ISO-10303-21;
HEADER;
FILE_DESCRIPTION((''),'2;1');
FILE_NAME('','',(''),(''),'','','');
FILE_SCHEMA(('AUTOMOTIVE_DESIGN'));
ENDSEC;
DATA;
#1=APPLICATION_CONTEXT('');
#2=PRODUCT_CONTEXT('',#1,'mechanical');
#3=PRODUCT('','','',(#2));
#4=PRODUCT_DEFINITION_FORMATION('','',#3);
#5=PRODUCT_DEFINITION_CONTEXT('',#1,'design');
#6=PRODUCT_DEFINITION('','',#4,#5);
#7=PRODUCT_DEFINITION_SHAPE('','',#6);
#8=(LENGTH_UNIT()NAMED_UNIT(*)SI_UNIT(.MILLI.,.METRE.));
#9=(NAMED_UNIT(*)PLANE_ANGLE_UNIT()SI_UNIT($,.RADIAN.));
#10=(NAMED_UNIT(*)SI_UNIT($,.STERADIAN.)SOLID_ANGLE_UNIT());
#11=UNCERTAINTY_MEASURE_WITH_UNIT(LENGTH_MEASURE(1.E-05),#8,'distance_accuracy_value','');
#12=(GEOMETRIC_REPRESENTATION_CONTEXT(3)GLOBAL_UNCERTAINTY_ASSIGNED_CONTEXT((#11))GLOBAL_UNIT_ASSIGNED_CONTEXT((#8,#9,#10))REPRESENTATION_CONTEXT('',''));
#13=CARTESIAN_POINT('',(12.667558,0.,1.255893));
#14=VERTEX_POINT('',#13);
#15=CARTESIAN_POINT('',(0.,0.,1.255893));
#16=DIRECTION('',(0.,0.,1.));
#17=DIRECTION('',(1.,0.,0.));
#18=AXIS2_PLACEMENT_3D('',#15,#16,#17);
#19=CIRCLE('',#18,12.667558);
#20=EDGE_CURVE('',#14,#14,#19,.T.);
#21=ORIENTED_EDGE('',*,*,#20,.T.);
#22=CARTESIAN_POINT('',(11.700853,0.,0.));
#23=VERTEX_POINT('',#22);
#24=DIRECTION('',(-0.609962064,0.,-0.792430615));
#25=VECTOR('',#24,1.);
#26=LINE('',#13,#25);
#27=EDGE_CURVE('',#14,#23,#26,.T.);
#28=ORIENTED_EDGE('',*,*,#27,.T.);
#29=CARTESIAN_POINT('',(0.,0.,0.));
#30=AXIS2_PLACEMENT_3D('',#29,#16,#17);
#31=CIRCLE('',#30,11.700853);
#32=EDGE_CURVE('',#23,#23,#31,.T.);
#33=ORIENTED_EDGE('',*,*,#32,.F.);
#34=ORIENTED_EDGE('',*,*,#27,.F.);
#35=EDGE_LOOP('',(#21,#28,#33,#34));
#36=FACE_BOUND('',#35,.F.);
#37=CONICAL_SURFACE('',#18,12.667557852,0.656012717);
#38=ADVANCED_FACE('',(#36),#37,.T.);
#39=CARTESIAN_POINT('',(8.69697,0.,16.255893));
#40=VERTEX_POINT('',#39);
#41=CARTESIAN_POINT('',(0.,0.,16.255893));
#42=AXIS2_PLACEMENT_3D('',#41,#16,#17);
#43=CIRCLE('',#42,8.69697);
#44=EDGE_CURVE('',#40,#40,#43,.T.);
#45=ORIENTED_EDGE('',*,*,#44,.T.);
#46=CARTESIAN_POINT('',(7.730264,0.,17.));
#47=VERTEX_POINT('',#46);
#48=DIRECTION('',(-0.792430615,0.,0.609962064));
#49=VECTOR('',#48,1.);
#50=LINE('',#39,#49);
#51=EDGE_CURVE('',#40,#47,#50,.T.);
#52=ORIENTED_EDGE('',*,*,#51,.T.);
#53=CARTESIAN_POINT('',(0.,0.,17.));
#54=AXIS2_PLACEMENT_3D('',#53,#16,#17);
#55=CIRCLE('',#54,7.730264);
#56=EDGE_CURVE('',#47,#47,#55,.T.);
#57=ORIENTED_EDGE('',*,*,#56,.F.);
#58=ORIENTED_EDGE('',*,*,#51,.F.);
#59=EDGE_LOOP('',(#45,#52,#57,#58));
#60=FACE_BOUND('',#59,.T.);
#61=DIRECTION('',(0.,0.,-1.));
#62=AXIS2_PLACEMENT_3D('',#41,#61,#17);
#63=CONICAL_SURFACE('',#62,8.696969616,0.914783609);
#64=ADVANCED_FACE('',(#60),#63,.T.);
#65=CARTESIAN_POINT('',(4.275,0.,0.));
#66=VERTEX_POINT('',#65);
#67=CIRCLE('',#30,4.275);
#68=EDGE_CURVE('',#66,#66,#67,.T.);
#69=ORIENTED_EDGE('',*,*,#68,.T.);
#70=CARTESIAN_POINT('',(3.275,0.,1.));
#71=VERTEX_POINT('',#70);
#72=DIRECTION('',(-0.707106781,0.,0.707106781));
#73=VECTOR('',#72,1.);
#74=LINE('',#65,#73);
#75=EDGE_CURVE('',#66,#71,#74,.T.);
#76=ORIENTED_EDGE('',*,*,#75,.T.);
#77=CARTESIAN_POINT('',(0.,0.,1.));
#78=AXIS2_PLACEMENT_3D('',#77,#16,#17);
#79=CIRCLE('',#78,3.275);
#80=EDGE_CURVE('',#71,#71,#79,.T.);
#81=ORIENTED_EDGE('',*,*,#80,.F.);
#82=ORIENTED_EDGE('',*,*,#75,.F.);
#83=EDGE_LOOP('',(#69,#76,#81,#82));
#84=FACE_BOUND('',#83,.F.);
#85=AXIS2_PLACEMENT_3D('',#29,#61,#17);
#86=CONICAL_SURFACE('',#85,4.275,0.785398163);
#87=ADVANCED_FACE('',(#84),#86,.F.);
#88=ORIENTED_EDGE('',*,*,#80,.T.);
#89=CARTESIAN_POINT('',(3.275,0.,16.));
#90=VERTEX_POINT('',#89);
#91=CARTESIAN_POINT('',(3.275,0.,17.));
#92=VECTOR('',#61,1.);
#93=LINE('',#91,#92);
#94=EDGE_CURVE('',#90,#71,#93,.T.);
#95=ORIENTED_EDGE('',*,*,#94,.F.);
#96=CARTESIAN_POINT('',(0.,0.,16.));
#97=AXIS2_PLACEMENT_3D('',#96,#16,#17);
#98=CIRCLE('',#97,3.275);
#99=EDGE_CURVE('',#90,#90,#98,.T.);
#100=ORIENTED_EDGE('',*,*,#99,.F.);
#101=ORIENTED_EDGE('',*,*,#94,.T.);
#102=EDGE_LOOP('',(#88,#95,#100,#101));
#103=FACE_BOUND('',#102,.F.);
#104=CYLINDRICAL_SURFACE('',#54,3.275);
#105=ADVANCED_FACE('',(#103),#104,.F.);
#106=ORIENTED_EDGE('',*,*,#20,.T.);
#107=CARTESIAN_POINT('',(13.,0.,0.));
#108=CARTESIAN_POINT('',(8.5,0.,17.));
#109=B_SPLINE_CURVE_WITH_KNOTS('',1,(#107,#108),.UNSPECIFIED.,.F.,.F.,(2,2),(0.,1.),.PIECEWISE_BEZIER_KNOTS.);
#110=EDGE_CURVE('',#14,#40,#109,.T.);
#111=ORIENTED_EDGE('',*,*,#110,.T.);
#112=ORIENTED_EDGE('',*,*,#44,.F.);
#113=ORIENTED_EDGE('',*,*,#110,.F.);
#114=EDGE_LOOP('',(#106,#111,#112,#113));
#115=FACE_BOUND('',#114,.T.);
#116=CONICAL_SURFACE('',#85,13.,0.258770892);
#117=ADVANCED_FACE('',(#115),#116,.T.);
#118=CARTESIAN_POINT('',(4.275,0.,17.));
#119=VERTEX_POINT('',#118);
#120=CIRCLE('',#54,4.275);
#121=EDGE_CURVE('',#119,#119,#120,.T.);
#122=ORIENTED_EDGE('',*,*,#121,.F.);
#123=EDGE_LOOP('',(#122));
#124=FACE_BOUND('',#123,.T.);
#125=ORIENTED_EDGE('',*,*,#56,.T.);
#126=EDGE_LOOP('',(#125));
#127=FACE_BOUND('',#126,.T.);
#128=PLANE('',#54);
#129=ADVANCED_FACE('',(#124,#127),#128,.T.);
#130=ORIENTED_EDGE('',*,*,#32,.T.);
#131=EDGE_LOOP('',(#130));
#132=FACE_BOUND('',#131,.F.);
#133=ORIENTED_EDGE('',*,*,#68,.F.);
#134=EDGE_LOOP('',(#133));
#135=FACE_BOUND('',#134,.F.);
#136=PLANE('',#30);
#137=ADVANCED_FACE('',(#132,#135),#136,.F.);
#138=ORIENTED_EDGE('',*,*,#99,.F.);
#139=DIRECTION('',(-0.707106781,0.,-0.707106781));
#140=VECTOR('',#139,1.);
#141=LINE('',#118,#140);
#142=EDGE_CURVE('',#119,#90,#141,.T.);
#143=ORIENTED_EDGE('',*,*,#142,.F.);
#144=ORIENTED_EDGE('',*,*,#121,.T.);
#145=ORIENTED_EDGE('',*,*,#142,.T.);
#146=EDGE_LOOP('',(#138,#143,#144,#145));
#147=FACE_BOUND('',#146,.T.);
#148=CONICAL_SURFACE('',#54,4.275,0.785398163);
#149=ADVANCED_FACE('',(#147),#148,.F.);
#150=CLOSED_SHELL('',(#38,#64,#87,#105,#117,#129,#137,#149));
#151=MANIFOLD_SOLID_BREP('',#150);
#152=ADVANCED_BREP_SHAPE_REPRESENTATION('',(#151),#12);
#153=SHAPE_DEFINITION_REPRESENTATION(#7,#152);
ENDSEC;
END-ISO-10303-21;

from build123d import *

# Parameters (mm, degrees)
F0_R     = 13
F2_R     = 8.5
F4_R     = 3.275
F5_DEPTH = 25


# Not quite as in the source:
# - a fillet or chamfer that OpenCascade refuses, or shapes differently, is made with other operations: its cross-section is extruded or revolved along the edge and cut away or added


with BuildPart() as f3:
    # F0 (on Top) → F3 section 0
    with BuildSketch(Plane.XY):
        Circle(F0_R)
    # F2 (on offset) → F3 section 1
    with BuildSketch(Plane.XY.offset(17)):
        Circle(F2_R)
    loft()

    # F4 (on face) → F5 (cut)
    with BuildSketch(Plane.XY.offset(17)):
        Circle(F4_R)
    extrude(amount=-F5_DEPTH, mode=Mode.SUBTRACT)

    # F6: chamfer of 1 on 4 edges, made by hand

    # F6_s1 → F6_t2 (revolve, cut)
    with BuildSketch(Plane.XZ):
        Polygon((4.275, 17), (3.275, 16), (3.275, 17), align=None)
    revolve(axis=Axis((0, 0, 17), (0, 0, 1)), mode=Mode.SUBTRACT)

    # F6_s3 → F6_t4 (revolve, cut)
    with BuildSketch(Plane.XZ):
        Polygon((8.6969696164, 16.2558925603), (7.7302643885, 17), (8.5, 17), align=None)
    revolve(axis=Axis((0, 0, 17), (0, 0, 1)), mode=Mode.SUBTRACT)

    # F6_s5 → F6_t6 (revolve, cut)
    with BuildSketch(Plane.XZ):
        Polygon((12.6675578517, 1.2558925603), (11.7008526238, 0), (13, 0), align=None)
    revolve(axis=Axis((0, 0, 0), (0, 0, 1)), mode=Mode.SUBTRACT)

    # F6_s7 → F6_t8 (revolve, cut)
    with BuildSketch(Plane.XZ):
        Polygon((4.275, 0), (3.275, 1), (3.275, 0), align=None)
    revolve(axis=Axis((0, 0, 0), (0, 0, 1)), mode=Mode.SUBTRACT)


solid = f3.part
